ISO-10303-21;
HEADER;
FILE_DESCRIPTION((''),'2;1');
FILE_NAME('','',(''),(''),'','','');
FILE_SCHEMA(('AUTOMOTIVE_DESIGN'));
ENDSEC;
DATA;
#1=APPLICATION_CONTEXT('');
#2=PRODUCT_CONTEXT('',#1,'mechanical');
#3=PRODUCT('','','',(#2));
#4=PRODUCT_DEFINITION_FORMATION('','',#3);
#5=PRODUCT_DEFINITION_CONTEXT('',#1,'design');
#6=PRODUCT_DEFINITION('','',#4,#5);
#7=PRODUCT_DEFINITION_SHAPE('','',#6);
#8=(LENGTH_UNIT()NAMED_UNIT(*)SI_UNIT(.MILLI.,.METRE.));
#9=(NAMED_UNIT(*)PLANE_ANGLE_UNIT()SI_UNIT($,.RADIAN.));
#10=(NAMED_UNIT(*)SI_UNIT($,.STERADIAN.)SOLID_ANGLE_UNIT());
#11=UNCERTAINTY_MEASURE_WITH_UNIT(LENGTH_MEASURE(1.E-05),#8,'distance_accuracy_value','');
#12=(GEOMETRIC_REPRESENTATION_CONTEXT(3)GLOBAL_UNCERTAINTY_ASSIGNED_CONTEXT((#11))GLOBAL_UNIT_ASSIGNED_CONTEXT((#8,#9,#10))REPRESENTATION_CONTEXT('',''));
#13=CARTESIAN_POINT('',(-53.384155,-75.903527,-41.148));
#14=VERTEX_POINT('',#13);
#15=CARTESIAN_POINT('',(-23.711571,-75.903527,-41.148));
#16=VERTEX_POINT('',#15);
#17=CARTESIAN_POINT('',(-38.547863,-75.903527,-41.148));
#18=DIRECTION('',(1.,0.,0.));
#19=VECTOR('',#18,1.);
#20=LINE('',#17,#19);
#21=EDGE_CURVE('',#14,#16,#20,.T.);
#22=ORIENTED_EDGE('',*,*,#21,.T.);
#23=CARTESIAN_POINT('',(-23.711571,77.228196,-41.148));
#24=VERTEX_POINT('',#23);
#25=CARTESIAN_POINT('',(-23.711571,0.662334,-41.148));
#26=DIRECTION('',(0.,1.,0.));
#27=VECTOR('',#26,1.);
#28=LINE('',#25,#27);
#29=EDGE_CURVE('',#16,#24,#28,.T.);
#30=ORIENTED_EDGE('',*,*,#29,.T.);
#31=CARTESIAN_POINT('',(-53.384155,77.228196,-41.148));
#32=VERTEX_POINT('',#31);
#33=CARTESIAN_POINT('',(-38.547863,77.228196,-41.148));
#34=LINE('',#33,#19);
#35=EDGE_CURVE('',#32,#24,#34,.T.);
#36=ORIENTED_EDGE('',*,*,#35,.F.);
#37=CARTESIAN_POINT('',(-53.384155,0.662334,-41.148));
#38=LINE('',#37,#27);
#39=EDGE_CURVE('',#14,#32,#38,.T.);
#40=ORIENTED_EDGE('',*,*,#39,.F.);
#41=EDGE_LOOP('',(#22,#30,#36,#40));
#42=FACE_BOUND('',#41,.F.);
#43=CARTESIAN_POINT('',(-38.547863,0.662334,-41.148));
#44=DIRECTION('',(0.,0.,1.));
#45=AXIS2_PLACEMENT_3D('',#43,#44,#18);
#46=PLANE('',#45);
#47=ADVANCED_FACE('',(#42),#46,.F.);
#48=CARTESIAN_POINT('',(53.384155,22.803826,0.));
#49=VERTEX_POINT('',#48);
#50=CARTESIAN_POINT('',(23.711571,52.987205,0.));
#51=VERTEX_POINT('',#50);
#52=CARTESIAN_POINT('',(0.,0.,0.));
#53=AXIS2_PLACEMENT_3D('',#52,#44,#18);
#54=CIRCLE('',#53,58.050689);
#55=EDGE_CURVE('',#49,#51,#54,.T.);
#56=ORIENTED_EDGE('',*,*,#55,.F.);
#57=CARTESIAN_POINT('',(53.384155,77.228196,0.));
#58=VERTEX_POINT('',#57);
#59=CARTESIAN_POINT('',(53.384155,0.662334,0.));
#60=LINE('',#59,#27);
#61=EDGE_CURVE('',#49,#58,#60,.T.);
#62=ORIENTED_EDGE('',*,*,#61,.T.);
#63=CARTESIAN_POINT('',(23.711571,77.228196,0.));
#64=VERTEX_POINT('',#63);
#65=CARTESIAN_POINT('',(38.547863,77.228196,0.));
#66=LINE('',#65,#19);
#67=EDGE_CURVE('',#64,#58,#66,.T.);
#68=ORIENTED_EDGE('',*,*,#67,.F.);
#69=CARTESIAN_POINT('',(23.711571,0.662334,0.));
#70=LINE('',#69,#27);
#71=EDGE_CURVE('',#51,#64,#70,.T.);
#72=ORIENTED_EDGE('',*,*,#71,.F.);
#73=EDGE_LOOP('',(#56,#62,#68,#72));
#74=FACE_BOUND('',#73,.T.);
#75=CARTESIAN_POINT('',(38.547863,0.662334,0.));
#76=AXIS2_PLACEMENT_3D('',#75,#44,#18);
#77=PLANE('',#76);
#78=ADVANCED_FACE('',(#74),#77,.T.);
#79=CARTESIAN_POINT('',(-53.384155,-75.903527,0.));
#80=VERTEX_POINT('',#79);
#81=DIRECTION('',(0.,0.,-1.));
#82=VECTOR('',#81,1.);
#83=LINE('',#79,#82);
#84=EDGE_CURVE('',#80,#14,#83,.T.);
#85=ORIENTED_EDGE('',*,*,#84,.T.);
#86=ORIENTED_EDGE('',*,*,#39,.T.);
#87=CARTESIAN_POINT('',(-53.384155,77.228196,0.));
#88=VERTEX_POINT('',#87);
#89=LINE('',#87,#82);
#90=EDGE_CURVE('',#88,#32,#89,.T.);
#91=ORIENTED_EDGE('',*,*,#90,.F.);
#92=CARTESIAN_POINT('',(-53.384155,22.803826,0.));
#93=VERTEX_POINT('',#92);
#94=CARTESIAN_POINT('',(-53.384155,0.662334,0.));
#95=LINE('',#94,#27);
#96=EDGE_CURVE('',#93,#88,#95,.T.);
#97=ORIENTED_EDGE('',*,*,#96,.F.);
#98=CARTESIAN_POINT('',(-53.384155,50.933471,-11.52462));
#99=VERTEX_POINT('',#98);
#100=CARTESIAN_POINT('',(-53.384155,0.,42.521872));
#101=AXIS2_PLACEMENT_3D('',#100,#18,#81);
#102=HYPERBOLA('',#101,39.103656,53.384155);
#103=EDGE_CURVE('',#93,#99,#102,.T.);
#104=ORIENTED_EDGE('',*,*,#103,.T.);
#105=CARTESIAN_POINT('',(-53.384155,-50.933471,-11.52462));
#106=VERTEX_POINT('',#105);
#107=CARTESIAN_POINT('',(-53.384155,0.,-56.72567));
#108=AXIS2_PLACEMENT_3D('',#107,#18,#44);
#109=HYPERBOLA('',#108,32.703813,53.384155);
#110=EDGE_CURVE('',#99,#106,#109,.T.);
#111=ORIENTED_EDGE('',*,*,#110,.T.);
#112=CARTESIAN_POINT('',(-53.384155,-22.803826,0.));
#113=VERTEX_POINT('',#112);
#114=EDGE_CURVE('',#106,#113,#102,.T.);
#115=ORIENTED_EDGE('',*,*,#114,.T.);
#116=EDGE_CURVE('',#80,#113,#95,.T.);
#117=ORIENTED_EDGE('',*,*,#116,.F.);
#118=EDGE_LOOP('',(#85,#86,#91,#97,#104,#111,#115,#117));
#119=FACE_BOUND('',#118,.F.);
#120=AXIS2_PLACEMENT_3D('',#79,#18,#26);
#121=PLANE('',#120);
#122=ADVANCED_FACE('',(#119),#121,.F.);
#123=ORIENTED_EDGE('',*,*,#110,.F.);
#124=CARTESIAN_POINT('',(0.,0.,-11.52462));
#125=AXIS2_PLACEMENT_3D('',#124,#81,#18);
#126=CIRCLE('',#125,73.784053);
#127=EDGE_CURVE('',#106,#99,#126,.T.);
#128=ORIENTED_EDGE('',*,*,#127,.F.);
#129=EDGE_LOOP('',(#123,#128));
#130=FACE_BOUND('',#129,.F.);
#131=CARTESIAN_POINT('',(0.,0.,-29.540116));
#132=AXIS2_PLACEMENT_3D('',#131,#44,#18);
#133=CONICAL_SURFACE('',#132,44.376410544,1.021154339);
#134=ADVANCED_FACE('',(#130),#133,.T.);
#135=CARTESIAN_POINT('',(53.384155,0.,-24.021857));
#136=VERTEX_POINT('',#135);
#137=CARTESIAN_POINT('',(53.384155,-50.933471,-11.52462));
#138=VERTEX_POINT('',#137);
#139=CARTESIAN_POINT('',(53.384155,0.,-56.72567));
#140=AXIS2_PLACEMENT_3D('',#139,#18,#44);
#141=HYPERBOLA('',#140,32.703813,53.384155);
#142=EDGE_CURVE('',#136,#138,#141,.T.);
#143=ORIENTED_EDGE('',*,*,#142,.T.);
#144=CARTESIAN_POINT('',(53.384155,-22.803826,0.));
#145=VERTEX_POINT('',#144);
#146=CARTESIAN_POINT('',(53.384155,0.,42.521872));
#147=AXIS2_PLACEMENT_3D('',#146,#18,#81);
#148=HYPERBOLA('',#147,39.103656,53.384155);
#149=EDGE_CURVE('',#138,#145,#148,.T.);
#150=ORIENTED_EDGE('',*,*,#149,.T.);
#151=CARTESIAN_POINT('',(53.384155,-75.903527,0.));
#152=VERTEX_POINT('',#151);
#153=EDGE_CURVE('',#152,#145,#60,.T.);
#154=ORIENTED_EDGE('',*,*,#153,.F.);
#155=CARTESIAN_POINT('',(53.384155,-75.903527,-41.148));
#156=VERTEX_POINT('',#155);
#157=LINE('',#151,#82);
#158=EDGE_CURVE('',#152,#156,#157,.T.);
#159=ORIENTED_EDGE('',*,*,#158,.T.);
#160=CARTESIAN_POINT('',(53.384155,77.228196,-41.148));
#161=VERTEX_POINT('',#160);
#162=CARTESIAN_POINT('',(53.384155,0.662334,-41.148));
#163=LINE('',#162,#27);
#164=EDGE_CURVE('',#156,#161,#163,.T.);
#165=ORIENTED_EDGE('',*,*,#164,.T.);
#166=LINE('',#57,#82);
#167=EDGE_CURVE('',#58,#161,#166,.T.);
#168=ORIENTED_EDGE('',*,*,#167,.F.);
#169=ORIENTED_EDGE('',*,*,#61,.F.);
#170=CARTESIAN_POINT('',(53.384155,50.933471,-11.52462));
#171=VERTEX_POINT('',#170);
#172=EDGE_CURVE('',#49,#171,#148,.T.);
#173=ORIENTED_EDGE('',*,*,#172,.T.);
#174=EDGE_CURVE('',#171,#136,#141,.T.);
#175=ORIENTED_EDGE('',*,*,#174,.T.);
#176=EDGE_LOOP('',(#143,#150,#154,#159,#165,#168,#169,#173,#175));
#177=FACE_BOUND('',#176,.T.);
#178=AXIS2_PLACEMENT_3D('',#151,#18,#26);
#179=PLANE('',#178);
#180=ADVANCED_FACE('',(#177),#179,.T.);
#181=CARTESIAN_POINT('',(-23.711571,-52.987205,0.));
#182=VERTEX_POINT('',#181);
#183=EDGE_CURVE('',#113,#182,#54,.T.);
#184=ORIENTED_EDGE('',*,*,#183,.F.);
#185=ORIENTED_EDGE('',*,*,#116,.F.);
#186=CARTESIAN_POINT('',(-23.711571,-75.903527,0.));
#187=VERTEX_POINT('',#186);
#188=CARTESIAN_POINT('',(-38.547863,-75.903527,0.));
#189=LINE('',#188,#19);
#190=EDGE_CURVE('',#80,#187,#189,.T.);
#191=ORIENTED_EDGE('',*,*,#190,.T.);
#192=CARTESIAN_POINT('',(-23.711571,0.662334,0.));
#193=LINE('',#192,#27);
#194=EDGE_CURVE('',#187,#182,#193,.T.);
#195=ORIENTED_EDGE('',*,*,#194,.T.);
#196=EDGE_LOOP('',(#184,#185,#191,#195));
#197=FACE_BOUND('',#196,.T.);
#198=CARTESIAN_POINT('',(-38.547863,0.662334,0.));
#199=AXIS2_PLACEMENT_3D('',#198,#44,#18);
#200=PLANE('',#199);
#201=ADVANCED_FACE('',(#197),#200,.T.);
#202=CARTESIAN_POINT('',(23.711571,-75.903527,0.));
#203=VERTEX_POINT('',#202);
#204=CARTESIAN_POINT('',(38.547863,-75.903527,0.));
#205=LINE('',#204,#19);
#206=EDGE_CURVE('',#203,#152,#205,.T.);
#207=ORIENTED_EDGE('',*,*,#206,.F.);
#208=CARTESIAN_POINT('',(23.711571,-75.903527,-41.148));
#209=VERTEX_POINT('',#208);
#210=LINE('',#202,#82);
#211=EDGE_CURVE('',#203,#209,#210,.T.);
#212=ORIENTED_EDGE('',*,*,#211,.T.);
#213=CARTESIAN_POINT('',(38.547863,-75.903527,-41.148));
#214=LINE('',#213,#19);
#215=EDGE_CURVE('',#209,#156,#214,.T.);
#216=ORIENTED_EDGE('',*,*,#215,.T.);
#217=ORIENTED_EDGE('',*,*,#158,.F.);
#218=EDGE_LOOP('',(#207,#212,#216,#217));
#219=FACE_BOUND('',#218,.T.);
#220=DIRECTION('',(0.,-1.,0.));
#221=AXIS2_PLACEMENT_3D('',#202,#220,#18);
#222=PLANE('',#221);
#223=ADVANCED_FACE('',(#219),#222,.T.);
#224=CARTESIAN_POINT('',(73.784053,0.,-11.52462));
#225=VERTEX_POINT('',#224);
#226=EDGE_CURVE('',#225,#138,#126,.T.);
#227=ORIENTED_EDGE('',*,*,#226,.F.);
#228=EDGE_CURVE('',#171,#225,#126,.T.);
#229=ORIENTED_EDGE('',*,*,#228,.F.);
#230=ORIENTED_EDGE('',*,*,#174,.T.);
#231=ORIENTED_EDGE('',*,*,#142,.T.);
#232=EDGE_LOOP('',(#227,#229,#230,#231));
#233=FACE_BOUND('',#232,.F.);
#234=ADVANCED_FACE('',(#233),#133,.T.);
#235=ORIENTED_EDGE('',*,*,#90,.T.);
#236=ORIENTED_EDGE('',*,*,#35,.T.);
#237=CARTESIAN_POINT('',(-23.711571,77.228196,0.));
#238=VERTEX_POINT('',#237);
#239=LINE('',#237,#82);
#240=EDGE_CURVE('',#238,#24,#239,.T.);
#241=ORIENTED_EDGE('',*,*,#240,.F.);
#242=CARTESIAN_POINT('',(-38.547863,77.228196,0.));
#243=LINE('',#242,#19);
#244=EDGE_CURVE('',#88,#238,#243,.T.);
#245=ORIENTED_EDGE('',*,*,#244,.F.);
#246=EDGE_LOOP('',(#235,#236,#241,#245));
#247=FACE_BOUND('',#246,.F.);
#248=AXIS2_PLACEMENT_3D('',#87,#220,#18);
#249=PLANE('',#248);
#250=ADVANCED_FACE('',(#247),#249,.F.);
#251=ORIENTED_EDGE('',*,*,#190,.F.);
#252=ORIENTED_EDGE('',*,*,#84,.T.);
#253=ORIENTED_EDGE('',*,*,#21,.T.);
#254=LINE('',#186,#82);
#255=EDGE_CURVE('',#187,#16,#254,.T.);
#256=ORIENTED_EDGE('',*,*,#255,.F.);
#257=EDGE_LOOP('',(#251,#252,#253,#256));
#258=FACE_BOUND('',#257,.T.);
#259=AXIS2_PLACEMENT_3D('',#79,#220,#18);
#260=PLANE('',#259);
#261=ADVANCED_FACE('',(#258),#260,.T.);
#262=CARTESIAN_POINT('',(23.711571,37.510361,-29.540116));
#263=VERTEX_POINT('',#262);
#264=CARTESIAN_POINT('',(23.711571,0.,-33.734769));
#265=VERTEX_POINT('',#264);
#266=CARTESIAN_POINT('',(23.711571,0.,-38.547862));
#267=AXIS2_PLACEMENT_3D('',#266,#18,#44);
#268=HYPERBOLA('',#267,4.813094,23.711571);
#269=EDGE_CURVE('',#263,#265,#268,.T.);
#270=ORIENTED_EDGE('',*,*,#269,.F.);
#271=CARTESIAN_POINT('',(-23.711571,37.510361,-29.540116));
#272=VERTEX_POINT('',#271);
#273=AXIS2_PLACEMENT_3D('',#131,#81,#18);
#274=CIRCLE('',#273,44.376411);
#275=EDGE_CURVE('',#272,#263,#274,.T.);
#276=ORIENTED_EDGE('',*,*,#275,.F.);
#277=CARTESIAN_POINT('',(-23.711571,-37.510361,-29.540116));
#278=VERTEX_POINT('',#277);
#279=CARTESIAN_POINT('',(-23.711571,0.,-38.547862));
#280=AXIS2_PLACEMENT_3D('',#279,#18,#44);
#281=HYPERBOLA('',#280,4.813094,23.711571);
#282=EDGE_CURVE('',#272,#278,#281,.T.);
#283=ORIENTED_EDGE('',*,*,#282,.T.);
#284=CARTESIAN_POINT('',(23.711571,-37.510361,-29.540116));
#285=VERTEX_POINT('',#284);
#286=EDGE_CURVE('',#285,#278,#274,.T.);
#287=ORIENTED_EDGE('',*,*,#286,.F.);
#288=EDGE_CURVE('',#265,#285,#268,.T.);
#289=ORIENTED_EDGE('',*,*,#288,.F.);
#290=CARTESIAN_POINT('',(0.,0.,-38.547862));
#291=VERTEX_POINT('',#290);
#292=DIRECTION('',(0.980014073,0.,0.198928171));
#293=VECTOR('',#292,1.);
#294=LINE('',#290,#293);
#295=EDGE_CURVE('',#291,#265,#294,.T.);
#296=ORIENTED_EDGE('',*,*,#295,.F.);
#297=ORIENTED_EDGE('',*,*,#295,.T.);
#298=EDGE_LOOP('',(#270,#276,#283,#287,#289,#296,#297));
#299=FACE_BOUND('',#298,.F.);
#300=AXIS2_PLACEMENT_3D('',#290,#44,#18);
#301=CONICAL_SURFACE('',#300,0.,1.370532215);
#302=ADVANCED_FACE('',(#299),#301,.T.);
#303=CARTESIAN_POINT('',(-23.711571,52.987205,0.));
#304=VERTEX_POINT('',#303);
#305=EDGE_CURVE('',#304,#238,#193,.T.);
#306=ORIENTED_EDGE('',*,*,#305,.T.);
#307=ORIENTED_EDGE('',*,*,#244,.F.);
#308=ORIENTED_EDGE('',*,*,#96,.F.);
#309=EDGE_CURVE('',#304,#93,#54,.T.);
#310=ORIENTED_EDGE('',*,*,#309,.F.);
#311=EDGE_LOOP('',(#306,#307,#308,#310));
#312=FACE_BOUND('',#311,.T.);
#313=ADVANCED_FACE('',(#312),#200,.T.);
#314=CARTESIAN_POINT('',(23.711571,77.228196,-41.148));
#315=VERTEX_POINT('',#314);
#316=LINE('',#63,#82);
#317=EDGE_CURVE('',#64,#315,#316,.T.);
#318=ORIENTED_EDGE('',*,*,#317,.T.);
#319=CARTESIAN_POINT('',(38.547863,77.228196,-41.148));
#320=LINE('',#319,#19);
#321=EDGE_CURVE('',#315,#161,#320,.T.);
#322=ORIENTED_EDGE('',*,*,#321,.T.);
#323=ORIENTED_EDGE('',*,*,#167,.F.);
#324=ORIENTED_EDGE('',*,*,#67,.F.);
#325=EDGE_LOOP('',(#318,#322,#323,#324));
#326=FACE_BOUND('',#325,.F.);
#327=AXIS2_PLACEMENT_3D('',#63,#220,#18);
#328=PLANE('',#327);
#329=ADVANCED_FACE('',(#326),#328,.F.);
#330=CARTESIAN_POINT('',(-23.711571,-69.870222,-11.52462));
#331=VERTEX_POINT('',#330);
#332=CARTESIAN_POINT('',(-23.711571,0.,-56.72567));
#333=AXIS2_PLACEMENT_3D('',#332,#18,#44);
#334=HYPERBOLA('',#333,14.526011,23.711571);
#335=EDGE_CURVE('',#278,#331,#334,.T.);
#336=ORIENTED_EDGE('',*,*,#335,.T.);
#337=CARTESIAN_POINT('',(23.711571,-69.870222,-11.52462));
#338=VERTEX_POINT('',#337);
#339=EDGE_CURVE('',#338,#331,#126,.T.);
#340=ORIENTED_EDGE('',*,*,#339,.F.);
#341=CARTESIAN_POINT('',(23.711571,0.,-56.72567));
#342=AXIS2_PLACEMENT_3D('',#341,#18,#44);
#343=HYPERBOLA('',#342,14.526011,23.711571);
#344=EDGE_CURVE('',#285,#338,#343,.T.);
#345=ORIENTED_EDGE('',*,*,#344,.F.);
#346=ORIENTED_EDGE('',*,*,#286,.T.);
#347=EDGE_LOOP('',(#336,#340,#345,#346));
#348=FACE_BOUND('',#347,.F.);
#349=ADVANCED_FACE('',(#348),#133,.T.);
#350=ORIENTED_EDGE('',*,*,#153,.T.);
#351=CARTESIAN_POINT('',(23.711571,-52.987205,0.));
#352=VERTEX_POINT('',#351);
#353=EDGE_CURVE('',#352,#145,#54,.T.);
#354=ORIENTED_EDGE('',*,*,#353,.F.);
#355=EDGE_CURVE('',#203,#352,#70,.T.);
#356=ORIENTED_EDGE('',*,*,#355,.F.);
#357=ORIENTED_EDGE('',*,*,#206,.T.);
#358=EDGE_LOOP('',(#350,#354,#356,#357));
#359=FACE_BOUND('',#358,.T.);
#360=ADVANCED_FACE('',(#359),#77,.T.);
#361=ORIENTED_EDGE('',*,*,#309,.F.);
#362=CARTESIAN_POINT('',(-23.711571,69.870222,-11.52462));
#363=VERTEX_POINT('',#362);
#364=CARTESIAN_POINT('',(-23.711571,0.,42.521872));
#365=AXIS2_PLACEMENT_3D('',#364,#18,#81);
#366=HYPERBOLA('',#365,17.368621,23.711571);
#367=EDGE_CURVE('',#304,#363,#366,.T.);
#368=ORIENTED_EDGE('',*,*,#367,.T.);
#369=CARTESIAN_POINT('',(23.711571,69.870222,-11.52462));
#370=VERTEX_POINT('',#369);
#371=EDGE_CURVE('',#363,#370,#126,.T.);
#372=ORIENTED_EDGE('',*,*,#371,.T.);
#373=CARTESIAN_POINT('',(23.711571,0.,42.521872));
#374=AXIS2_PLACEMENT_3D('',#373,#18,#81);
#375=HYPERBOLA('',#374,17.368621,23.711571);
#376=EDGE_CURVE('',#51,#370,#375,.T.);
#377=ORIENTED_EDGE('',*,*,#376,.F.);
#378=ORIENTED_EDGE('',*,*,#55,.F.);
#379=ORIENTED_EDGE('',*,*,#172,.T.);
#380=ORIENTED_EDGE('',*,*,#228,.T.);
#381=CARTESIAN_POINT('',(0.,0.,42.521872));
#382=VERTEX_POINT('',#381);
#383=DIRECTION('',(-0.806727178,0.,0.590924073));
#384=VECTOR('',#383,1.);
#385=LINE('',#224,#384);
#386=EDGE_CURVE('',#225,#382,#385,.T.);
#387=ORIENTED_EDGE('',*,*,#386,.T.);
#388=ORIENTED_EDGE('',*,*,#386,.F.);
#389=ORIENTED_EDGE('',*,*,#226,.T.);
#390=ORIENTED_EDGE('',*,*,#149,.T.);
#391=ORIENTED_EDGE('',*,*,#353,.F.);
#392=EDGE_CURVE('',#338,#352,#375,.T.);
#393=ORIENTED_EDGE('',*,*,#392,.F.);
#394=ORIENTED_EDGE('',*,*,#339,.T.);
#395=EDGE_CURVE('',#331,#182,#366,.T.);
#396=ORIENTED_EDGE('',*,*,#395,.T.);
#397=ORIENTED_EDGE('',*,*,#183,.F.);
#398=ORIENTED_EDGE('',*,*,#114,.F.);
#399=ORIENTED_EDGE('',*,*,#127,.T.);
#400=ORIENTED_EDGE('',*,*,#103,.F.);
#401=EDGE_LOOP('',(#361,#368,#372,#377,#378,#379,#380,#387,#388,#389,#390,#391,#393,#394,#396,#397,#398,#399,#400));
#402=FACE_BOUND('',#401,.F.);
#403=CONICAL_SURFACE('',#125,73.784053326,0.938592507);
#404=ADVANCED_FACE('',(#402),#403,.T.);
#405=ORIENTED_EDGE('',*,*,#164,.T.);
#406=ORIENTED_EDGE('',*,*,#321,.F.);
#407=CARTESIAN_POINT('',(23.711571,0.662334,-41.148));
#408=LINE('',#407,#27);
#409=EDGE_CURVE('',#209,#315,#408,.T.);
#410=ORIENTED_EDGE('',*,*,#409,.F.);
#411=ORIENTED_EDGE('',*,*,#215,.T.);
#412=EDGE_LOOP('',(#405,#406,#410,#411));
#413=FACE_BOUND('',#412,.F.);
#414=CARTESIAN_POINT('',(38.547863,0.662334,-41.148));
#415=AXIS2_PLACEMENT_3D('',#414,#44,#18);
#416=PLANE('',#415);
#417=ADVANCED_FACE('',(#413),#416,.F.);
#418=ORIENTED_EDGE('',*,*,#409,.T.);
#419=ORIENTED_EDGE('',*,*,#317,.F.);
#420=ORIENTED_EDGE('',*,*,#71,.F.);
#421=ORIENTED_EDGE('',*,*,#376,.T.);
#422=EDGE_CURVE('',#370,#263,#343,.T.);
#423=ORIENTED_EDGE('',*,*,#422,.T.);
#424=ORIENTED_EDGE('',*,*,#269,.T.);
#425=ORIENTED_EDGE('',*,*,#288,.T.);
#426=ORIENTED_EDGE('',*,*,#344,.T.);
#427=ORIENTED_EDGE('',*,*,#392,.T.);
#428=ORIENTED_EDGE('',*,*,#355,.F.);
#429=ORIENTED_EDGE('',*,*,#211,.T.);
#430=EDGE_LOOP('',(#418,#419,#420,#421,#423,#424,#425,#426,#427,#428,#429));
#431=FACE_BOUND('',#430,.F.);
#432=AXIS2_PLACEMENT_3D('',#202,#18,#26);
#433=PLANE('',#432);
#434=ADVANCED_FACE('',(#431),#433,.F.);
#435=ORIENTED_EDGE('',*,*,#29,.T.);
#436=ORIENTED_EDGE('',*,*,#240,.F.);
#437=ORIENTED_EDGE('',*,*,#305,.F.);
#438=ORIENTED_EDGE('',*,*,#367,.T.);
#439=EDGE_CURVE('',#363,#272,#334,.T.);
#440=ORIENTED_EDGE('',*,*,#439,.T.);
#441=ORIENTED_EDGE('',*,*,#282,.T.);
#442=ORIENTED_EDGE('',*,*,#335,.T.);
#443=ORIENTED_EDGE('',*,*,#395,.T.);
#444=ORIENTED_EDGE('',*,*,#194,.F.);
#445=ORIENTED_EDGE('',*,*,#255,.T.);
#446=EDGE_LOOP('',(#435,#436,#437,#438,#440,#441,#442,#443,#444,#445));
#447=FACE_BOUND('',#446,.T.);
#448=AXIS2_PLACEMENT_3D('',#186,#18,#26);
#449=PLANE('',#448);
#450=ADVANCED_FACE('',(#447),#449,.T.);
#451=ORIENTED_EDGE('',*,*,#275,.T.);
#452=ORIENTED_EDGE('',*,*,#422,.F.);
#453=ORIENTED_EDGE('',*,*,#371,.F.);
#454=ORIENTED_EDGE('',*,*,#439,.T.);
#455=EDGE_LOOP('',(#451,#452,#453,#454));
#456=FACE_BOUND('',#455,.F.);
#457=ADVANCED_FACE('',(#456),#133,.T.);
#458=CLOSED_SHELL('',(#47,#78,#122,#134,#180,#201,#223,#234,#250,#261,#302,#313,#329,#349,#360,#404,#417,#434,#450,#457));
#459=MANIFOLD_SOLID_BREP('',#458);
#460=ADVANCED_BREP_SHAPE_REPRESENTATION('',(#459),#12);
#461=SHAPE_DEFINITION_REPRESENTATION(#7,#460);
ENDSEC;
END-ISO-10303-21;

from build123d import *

# Parameters (mm, degrees)
F2_W     = 29.6725835651
F2_H     = 153.1317234039
F3_DEPTH = 41.148


# Not quite as in the source:
# - the program builds the solid bodies; features that only make, move or delete a surface that nothing else refers to are left out


with BuildPart() as f1:
    # F0 (on Front) → F1 (revolve)
    with BuildSketch(Plane.XZ):
        Polygon((0, 42.5218716264), (0, -38.5478623211), (44.3764105439, -29.5401159674), (73.7840533257, -11.5246195346), align=None)
    revolve(axis=Axis((0, 0, 1.9870046526), (0, 0, -1)))

    # F2 (on Top) → F3 (join)
    with BuildSketch(Plane.XY):
        with Locations((-38.5478632525, 0.6623342633)):
            Rectangle(F2_W, F2_H)
        with Locations((38.5478632525, 0.6623342633)):
            Rectangle(F2_W, F2_H)
    extrude(amount=-F3_DEPTH)


solid = f1.part
